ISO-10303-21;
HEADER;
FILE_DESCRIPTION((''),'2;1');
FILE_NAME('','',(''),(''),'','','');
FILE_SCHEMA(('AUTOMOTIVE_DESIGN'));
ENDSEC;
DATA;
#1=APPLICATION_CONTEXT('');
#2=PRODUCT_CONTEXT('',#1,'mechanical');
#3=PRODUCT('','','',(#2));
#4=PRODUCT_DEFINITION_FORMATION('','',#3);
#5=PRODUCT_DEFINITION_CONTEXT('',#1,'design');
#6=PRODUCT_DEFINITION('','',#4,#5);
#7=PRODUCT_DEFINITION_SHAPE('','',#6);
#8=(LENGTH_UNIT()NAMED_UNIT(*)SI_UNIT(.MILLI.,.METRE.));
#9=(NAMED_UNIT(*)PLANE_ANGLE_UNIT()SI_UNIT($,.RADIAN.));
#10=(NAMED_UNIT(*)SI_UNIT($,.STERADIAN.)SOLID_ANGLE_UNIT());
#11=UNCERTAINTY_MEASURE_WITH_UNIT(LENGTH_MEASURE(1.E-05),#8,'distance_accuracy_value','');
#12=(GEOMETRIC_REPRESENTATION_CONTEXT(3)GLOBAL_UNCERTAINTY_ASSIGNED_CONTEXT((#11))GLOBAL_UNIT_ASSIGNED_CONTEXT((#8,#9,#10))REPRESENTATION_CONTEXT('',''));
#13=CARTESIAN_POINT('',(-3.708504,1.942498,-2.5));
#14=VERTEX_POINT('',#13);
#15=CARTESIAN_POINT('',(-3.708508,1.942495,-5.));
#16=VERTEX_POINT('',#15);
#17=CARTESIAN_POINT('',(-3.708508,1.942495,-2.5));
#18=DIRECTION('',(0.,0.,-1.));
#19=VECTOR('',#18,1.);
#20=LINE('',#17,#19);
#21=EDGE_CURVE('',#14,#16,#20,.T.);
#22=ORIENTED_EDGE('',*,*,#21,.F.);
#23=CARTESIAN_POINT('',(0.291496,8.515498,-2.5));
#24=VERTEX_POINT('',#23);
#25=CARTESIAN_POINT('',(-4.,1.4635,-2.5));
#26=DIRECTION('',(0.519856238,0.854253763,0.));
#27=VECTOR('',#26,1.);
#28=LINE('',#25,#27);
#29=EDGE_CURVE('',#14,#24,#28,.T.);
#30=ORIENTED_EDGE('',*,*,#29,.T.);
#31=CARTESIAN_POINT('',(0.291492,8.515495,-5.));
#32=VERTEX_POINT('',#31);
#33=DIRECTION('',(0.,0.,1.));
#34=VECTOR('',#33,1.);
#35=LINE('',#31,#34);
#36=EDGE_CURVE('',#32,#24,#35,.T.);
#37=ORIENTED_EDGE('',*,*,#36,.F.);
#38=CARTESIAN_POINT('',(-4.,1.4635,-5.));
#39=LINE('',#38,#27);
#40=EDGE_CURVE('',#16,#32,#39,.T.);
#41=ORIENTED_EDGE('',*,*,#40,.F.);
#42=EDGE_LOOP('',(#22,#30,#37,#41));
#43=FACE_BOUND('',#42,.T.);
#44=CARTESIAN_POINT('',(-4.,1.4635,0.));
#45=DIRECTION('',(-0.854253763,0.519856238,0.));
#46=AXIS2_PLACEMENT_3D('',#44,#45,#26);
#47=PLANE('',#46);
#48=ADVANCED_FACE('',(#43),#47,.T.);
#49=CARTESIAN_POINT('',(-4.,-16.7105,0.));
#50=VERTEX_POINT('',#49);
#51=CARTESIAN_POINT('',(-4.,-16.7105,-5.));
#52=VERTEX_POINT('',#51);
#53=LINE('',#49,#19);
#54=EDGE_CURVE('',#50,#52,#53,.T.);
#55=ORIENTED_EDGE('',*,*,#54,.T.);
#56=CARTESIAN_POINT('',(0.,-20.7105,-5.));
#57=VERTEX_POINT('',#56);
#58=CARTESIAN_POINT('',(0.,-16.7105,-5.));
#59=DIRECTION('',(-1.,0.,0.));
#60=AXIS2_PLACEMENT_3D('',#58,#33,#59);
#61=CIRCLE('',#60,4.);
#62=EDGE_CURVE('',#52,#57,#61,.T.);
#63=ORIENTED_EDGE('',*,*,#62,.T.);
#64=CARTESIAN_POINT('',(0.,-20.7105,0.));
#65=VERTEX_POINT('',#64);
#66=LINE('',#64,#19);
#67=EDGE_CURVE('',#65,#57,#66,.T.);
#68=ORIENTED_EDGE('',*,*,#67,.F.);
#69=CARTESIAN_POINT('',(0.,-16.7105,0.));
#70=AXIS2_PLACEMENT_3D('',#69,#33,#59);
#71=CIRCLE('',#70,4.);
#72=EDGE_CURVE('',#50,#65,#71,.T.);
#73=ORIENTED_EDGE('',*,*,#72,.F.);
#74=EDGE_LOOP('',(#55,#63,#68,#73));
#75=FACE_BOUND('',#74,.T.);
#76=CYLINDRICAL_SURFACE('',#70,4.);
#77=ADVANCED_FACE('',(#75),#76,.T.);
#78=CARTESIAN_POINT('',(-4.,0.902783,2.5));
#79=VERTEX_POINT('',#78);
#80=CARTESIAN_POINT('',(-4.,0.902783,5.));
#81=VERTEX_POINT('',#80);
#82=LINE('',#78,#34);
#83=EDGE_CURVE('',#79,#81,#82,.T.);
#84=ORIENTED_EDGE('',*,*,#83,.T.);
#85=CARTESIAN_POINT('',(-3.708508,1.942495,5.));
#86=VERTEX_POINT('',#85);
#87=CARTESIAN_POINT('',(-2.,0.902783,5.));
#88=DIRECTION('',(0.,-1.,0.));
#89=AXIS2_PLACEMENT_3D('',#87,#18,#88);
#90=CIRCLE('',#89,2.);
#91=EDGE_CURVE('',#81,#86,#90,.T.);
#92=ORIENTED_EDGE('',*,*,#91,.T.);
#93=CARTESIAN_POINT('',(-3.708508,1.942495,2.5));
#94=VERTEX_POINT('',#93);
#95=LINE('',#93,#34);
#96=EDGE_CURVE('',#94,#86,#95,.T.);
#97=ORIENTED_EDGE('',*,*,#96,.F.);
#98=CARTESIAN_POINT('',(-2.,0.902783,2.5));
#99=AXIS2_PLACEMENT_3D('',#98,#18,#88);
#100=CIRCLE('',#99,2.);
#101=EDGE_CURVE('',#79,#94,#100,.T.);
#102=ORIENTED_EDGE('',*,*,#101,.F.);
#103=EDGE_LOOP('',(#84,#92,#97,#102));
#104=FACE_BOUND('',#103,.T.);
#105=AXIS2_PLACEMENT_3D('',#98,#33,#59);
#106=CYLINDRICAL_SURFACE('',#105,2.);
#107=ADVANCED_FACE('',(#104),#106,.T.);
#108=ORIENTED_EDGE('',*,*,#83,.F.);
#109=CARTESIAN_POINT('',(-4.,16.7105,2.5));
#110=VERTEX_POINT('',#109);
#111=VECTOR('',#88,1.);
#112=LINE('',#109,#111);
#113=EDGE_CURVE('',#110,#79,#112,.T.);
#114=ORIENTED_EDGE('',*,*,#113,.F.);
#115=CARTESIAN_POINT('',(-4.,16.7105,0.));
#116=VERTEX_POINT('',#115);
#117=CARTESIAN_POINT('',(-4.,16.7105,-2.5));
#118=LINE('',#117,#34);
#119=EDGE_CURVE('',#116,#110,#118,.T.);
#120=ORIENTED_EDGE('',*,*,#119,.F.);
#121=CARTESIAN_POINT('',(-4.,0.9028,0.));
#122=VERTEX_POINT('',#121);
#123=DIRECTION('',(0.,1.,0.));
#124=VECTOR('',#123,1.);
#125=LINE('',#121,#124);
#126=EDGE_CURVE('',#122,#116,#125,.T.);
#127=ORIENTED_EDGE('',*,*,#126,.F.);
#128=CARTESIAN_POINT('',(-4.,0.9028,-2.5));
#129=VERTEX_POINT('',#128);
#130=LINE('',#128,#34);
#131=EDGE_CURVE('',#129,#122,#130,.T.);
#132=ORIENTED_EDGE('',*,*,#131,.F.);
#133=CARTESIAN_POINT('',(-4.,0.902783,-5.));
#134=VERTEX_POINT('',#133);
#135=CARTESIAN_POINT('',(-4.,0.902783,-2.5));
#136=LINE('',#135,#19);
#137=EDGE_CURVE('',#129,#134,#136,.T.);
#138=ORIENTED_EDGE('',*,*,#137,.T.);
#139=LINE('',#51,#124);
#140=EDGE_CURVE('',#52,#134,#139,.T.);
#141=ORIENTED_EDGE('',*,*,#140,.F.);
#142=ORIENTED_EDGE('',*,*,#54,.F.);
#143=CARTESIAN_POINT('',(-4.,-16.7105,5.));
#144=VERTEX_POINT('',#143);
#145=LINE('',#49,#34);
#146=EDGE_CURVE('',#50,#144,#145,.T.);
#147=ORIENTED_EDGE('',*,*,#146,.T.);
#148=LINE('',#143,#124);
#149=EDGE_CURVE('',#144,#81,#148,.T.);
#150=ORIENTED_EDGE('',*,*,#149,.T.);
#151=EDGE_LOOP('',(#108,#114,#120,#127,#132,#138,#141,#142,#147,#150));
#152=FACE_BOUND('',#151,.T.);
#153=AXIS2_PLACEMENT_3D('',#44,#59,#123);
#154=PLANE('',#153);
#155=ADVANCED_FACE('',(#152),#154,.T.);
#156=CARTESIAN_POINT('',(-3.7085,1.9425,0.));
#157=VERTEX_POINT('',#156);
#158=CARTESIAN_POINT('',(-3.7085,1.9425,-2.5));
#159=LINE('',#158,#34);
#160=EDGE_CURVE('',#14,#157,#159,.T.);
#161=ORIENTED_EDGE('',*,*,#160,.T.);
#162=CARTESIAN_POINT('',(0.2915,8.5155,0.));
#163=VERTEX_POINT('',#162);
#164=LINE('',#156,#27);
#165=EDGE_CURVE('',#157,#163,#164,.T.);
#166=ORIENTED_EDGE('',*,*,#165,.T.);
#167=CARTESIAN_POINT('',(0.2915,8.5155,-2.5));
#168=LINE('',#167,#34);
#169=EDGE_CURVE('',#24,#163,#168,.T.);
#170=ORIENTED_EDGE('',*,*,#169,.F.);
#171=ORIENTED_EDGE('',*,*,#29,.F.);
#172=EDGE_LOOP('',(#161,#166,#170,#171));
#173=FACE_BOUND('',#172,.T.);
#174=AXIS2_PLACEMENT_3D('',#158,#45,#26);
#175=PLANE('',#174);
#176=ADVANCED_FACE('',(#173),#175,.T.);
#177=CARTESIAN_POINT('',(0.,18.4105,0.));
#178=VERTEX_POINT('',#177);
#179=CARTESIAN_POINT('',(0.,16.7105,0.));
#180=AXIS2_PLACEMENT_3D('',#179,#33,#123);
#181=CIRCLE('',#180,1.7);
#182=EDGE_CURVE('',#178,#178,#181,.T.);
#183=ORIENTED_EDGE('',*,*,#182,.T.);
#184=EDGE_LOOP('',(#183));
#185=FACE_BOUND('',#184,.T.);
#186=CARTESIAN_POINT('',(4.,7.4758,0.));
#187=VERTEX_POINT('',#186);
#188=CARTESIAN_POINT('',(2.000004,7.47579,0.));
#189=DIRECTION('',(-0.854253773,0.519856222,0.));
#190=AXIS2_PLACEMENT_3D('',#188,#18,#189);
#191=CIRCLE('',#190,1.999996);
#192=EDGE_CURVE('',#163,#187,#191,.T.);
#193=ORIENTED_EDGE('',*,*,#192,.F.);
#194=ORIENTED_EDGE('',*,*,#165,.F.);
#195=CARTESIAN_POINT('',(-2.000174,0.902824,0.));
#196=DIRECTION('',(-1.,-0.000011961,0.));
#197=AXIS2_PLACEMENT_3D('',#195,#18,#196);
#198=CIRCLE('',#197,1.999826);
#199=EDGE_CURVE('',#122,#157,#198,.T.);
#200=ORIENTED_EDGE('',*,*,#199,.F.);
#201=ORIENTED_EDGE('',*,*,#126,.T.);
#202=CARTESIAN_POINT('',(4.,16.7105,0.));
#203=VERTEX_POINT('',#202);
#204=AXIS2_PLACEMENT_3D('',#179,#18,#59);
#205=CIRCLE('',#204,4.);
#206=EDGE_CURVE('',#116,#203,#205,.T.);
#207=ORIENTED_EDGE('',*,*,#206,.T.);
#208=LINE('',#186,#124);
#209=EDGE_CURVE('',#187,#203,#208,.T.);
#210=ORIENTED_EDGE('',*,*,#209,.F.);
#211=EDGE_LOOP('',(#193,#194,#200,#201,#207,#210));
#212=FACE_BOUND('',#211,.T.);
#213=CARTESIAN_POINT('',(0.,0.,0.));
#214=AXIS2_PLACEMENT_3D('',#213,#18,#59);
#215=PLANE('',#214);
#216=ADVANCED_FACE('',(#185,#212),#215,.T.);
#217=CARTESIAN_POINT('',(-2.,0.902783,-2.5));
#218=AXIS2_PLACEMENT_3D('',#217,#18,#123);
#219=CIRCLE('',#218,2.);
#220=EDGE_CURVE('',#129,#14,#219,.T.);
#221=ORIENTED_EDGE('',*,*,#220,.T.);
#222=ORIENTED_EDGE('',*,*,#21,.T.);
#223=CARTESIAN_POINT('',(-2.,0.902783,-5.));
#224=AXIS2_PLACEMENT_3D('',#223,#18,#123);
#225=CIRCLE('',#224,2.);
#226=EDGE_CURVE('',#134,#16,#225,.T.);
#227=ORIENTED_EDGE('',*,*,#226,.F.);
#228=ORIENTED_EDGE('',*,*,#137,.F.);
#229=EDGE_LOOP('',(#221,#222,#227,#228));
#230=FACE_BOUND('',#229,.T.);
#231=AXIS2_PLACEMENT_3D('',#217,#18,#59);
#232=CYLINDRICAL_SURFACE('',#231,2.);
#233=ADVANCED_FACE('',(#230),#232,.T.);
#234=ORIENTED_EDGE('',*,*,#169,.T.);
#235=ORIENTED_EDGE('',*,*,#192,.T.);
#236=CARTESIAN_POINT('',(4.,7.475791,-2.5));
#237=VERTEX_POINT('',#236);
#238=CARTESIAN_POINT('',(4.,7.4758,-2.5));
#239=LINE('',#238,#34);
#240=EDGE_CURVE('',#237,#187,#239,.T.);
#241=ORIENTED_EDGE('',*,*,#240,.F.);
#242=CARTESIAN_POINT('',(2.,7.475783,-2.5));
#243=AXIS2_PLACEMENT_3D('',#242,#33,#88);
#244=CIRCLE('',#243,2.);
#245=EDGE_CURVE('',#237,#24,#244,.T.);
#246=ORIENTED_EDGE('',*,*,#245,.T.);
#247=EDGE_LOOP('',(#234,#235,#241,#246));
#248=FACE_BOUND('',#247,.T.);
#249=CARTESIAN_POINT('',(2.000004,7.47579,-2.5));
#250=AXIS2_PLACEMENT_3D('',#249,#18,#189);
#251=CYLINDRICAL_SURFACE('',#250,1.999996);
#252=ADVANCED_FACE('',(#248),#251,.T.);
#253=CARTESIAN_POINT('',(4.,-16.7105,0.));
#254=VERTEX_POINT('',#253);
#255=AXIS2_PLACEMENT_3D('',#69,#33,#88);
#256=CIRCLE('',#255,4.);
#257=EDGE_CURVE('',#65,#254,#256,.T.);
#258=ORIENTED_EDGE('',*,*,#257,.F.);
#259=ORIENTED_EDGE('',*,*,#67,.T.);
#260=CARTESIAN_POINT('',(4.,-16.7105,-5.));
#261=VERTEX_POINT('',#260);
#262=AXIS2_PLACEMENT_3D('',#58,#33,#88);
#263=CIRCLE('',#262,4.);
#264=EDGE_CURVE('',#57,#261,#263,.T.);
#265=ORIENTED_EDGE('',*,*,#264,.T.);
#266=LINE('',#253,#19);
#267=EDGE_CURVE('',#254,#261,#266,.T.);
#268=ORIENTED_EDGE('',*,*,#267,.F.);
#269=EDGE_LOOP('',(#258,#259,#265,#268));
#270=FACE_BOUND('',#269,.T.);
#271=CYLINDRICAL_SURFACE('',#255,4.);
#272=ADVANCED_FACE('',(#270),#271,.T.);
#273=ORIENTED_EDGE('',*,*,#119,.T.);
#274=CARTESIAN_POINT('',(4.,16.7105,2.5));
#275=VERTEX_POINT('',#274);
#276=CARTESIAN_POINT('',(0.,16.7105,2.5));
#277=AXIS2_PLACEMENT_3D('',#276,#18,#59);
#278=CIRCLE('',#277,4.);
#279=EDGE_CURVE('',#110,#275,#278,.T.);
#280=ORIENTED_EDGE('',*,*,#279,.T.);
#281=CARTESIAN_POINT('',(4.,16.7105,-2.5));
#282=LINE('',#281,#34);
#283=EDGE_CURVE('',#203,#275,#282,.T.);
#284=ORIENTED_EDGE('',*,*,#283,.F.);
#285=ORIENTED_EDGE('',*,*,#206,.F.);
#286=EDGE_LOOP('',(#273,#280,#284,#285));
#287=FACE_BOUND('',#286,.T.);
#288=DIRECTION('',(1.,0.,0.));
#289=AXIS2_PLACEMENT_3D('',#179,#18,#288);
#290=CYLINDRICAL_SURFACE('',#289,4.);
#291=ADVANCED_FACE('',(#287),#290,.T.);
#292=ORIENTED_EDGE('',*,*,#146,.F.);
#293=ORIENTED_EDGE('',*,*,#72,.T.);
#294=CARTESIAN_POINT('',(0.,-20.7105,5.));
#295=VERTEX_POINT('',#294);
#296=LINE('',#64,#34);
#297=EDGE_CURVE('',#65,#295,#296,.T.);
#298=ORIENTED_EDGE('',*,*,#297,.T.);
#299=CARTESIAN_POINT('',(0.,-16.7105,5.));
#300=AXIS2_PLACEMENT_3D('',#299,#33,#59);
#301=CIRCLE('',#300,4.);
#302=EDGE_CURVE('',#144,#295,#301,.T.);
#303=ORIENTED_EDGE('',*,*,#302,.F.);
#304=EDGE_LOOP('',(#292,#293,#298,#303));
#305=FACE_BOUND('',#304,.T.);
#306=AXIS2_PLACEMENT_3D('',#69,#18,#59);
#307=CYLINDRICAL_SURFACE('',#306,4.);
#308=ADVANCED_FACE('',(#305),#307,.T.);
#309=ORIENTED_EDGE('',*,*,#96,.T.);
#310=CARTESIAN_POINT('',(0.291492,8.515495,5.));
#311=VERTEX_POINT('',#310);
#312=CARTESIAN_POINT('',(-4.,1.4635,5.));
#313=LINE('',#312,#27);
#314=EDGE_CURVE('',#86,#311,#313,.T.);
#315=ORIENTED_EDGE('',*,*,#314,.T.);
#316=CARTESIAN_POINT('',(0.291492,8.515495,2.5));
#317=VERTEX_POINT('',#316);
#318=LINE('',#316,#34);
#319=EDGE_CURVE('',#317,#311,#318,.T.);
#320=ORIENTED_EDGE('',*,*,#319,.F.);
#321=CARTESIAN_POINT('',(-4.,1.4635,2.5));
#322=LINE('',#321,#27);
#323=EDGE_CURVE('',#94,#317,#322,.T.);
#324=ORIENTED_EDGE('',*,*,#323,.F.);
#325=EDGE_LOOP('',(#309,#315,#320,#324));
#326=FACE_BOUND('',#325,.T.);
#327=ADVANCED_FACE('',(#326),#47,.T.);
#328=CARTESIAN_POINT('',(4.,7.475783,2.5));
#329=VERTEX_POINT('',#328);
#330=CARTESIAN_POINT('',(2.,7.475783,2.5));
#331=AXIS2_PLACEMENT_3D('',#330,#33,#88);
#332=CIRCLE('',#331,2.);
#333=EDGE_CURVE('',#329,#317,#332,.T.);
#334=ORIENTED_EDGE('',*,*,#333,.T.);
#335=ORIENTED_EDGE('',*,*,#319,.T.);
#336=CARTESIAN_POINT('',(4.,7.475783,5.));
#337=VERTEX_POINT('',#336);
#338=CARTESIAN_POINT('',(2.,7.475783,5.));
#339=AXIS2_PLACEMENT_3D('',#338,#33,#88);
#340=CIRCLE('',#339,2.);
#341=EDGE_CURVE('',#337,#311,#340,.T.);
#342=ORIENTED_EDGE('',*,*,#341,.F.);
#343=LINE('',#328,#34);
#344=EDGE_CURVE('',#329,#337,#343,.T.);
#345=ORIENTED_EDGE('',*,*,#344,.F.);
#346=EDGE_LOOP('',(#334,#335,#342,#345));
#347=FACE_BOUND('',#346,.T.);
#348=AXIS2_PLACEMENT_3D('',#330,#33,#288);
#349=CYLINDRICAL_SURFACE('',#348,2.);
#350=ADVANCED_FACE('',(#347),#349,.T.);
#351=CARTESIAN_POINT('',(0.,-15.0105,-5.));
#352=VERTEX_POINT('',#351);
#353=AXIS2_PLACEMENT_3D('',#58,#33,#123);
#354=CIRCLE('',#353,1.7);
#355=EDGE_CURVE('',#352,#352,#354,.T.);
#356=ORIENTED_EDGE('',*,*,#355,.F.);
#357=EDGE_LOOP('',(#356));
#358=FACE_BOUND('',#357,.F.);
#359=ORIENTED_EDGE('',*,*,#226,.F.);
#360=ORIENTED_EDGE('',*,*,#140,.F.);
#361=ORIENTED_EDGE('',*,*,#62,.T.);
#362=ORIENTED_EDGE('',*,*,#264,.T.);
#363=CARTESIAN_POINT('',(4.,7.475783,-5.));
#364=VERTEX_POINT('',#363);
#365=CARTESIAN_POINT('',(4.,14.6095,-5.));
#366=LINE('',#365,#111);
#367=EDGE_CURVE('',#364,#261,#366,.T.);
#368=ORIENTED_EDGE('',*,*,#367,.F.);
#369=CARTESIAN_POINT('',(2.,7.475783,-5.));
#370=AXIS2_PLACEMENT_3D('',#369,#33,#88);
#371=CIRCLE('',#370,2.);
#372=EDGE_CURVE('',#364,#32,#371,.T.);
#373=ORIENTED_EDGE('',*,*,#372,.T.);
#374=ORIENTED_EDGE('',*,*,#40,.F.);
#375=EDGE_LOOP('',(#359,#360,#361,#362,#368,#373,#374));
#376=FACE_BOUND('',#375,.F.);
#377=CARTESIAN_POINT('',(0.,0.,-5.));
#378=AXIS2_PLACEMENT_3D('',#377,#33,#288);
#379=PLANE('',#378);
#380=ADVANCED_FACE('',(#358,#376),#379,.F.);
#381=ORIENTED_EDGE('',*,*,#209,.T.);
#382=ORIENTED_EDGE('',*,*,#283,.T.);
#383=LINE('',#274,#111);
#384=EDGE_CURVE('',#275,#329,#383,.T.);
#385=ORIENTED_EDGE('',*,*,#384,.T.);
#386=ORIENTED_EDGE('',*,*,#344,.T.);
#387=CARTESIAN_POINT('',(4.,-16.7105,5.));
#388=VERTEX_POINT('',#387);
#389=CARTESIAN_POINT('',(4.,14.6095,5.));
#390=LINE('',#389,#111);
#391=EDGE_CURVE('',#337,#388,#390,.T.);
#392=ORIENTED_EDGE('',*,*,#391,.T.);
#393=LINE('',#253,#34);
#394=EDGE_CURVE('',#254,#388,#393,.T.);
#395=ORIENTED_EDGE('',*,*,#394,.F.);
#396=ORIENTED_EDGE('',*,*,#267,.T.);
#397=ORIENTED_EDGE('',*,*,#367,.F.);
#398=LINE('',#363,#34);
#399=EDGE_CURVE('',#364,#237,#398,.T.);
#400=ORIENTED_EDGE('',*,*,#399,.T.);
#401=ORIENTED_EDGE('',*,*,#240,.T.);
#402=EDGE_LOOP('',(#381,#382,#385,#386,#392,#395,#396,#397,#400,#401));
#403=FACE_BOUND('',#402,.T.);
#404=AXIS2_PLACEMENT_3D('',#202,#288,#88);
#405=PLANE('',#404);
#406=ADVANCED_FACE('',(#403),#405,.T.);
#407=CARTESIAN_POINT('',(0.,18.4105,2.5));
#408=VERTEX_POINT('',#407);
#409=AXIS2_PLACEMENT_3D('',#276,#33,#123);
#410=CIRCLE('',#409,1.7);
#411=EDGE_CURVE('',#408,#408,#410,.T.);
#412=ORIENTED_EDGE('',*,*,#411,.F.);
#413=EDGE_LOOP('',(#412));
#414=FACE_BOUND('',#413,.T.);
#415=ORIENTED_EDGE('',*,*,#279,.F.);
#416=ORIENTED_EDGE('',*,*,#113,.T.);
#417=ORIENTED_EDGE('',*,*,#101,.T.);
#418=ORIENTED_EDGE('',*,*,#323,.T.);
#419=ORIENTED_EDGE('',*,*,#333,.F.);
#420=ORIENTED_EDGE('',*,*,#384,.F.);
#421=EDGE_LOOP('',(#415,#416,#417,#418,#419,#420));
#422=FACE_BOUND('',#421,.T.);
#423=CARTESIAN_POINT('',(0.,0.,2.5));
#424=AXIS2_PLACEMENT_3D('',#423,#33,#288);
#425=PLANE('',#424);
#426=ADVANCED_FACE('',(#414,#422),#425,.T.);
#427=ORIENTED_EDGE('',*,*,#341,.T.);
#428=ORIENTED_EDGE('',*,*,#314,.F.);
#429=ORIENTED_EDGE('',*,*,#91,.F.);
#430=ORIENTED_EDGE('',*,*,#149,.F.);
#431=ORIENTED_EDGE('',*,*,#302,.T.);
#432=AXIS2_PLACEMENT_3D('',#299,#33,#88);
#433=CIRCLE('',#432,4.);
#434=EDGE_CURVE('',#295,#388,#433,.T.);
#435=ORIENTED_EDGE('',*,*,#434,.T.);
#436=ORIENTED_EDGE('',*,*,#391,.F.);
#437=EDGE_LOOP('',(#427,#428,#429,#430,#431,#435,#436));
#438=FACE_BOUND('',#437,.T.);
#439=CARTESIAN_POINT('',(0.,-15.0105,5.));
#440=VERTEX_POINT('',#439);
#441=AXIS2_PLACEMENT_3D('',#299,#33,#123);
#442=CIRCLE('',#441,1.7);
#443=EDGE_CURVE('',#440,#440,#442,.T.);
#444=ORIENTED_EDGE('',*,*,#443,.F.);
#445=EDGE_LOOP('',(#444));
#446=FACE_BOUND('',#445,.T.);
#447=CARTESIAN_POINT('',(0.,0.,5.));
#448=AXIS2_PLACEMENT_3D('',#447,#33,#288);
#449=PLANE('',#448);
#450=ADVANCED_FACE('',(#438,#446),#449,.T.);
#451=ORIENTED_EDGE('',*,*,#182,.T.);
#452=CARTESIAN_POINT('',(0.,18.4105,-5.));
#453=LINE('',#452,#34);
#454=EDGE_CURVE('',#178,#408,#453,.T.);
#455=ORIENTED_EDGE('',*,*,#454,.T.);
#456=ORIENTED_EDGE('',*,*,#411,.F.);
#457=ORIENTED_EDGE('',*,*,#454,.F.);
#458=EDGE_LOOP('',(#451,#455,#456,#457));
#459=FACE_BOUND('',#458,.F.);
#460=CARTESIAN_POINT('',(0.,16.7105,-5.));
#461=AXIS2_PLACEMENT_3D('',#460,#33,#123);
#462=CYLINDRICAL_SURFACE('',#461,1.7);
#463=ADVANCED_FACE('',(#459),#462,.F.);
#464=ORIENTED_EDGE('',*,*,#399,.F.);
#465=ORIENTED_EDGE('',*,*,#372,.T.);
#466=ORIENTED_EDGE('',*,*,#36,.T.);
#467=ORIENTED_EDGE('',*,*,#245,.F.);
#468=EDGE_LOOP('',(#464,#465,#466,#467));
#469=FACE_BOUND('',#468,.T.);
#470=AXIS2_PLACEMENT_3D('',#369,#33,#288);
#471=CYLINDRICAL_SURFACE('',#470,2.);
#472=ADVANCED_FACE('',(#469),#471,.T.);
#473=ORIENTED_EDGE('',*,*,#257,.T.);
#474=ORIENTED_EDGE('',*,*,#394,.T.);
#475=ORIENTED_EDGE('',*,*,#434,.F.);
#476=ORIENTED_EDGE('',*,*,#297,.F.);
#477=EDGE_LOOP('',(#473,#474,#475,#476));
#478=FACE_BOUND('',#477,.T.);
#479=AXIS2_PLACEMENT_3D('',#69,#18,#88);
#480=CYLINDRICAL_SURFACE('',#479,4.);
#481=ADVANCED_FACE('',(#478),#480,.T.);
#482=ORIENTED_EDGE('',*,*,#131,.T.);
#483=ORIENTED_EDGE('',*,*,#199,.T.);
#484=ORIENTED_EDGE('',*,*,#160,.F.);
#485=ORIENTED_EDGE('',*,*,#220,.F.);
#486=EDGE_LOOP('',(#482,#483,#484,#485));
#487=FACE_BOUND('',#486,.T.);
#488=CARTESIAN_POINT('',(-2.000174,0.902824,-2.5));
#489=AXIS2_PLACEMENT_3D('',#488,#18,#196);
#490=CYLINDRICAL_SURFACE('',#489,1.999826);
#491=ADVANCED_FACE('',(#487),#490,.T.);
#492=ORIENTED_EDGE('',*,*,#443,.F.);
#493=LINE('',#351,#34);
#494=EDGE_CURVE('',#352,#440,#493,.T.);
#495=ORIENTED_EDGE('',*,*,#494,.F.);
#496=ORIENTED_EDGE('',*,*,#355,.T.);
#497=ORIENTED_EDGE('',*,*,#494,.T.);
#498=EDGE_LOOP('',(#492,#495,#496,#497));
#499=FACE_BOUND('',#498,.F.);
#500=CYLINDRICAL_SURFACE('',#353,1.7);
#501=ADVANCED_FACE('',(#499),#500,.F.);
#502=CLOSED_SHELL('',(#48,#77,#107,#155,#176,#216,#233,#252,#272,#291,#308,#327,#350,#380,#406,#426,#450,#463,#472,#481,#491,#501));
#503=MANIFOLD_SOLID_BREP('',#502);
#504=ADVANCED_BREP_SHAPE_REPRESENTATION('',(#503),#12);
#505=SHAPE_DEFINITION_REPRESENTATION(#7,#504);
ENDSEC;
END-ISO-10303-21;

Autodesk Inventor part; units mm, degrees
ref_plane "YZ Plane" through (0, 0, 0) normal (1, 0, 0) x (0, 1, 0)
ref_plane "XZ Plane" through (0, 0, 0) normal (0, 1, 0) x (-1, 0, 0)
ref_plane "XY Plane" through (0, 0, 0) normal (0, 0, 1) x (1, 0, 0)
sketch "Sketch1" plane through (0, 0, 0) normal (0, 0, 1) x (1, 0, 0)
  line L0 (0, 20.7105) -> (0, 20.7105)
  line L1 (4, 16.7105) -> (4, 14.6095)
  line L2 (0, -20.7105) -> (0, -20.7105)
  line L3 (-4, -16.7105) -> (-4, 1.4635)
  line L4 (-4, 20.7105) -> (0, 20.7105) construction
  line L5 (0, 20.7105) -> (0, 0) construction
  line L6 (0, 0) -> (-4, 0) construction
  line L7 (-4, 0) -> (-4, 20.7105) construction
  arc A0 (4, 16.7105) -> (0, 20.7105) centre (0, 16.7105) ccw
  arc A1 (0, 20.7105) -> (-4, 16.7105) centre (0, 16.7105) ccw
  arc A2 (-4, -16.7105) -> (0, -20.7105) centre (0, -16.7105) ccw
  arc A3 (0, -20.7105) -> (4, -16.7105) centre (0, -16.7105) ccw
  line L8 (-4, 1.4635) -> (4, 14.6095)
  line L9 (-4, 1.4635) -> (-4, 16.7105)
  line L10 (4, 14.6095) -> (4, -16.7105)
  dimension "d0" = 4
  dimension "d6" = 33.421
extrude "Extrusion2" add sketch "Sketch1" along normal mid plane 5 contours L1 L8 L9 A1 A0
extrude "Extrusion3" add sketch "Sketch1" along normal mid plane 10 contours L10 A3 A2 L3 L8
fillet "Fillet1" radius 2 4 edges at (4, 14.6095, -3.75) (-4, 1.4635, -3.75) (4, 14.6095, 3.75) (-4, 1.4635, 3.75)
sketch "Sketch3" plane through (0, 0, -5) normal (0, 0, -1) x (-1, 0, 0)
  arc A0 (-4, -16.7105) -> (4, -16.7105) centre (0, -16.7105) ccw projected
  arc A1 (4, 16.7105) -> (-4, 16.7105) centre (0, 16.7105) ccw projected
  line L0 (-4, 7.4758) -> (-4, 16.7105) projected
  arc A2 (-0.2915, 8.5155) -> (-4, 7.4758) centre (-2, 7.4758) ccw projected
  line L1 (3.7085, 1.9425) -> (-0.2915, 8.5155) projected
  arc A3 (4, 0.9028) -> (3.7085, 1.9425) centre (2, 0.9028) ccw projected
  line L2 (4, 0.9028) -> (4, 16.7105) projected
  point P0 (0, 0)
hole "Hole2" at (0, 16.7105, -5) at (0, -16.7105, -5) direction (0, 0, 1) diameter 3.4 end through all clearance for "Socket Head Cap Screw" size "M3" standard "Ansi Metric M Profile"
sketch "Sketch4" plane through (0, 0, -2.5) normal (0, 0, -1) x (-1, 0, 0)
  circle A0 centre (0, 16.7105) radius 1.7 projected
  arc A1 (4, 16.7105) -> (-4, 16.7105) centre (0, 16.7105) ccw projected
  line L0 (-4, 7.4758) -> (-4, 16.7105) projected
  arc A2 (-0.2915, 8.5155) -> (-4, 7.4758) centre (-2, 7.4758) ccw projected
  line L1 (3.7085, 1.9425) -> (-0.2915, 8.5155) projected
  arc A3 (4, 0.9028) -> (3.7085, 1.9425) centre (2, 0.9028) ccw projected
  line L2 (4, 0.9028) -> (4, 16.7105) projected
  point P0 (0, 0)
extrude "Extrusion4" cut sketch "Sketch4" against normal up to surface (2.5 mm away)
equation "\"d6\" = LengthJ"
equation "\"LengthJ\" = 33.421041"
properties part number "F"
